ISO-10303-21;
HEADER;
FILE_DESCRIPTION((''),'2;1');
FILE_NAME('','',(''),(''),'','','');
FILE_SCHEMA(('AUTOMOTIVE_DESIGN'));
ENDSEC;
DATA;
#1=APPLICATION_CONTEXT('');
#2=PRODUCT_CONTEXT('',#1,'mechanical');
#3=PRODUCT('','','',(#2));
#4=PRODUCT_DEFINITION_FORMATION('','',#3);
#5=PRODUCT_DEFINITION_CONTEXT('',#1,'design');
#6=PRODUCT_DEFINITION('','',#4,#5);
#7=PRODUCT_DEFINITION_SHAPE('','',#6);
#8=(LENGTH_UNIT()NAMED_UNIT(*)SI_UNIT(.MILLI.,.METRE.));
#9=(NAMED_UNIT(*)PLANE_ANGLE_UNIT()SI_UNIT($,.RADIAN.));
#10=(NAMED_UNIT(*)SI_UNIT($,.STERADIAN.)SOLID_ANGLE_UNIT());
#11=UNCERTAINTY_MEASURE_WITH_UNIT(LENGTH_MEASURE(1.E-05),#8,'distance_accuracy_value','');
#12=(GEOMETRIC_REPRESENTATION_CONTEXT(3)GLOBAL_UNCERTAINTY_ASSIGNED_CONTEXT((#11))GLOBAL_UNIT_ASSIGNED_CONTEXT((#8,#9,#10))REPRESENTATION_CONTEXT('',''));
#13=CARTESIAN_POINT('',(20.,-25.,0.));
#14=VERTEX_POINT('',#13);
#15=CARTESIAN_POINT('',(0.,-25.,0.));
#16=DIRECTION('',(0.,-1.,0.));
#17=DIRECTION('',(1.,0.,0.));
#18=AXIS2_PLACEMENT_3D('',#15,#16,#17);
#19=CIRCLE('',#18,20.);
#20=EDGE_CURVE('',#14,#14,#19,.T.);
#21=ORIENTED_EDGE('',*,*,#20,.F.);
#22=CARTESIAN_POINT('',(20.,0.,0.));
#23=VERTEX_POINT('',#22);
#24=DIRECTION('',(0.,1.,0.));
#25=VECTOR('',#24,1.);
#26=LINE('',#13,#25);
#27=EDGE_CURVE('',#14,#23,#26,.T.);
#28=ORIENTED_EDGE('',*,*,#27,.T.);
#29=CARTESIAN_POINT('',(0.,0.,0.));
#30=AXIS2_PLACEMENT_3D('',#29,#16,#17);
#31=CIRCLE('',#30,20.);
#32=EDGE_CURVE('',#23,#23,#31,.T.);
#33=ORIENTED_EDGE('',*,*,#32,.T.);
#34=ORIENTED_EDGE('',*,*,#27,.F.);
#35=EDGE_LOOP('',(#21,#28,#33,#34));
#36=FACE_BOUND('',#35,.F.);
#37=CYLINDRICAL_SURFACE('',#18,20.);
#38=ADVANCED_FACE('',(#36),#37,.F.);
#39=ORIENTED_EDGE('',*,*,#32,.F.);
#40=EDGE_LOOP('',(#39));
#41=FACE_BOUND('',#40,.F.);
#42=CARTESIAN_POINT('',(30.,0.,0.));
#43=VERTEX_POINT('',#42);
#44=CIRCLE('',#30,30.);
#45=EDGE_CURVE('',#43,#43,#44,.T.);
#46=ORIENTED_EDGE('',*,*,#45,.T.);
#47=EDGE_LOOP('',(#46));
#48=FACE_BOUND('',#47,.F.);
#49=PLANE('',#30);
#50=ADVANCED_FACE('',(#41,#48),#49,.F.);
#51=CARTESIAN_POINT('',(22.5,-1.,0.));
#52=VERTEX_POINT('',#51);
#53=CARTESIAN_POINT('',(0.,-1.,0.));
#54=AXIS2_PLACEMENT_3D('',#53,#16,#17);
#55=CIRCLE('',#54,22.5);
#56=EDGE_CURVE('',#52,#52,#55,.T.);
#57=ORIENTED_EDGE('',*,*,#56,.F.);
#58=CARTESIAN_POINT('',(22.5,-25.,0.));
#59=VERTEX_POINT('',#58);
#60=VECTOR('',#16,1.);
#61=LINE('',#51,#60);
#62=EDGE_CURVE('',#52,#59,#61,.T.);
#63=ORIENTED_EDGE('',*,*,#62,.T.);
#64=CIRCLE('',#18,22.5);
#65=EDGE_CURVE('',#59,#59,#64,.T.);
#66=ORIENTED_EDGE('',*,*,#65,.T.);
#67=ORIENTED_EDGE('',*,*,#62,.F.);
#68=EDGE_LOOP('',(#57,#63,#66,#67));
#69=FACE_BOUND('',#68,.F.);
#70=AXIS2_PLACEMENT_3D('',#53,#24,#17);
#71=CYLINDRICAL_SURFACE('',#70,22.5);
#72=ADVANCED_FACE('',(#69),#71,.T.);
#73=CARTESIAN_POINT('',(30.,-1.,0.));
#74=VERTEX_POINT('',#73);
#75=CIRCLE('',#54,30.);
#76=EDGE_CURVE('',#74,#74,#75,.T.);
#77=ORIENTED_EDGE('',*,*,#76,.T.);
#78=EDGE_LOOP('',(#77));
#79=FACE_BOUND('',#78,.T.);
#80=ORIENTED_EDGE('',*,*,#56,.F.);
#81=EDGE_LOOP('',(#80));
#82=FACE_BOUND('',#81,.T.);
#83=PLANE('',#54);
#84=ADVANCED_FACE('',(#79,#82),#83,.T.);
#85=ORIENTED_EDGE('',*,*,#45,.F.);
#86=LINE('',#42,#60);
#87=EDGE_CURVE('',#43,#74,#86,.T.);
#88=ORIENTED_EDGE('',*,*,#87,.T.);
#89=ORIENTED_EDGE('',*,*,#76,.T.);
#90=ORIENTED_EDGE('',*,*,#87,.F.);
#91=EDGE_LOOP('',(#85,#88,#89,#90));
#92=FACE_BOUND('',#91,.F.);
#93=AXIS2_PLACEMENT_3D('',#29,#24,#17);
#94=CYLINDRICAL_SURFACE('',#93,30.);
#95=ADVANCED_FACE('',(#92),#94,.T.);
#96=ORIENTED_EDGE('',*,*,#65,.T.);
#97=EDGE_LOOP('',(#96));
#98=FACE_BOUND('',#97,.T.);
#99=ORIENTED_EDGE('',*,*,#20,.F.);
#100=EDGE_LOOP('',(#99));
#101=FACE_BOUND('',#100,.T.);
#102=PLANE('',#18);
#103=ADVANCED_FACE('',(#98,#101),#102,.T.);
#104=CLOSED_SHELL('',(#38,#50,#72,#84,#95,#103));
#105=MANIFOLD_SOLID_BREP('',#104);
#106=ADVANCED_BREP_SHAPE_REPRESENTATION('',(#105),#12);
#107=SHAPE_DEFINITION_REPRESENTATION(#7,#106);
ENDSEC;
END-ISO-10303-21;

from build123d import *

# Parameters (mm, degrees)
F0_R     = 30
F1_DEPTH = 1
F2_R     = 22.5
F3_DEPTH = 24
F5_R     = 20
F6_DEPTH = 25.001


# Not quite as in the source:
# - the program builds the solid bodies; features that only make, move or delete a surface that nothing else refers to are left out


with BuildPart() as f1:
    # F0 (on Front) → F1 (new body)
    with BuildSketch(Plane.XZ):
        Circle(F0_R)
    extrude(amount=F1_DEPTH)

    # F2 (on face) → F3 (join)
    with BuildSketch(Plane.XZ.offset(1)):
        Circle(F2_R)
    extrude(amount=F3_DEPTH)

    # F5 (on face) → F6 (cut, through all)
    with BuildSketch(Plane.XZ.offset(25)):
        Circle(F5_R)
    extrude(amount=-F6_DEPTH, mode=Mode.SUBTRACT)


solid = f1.part
